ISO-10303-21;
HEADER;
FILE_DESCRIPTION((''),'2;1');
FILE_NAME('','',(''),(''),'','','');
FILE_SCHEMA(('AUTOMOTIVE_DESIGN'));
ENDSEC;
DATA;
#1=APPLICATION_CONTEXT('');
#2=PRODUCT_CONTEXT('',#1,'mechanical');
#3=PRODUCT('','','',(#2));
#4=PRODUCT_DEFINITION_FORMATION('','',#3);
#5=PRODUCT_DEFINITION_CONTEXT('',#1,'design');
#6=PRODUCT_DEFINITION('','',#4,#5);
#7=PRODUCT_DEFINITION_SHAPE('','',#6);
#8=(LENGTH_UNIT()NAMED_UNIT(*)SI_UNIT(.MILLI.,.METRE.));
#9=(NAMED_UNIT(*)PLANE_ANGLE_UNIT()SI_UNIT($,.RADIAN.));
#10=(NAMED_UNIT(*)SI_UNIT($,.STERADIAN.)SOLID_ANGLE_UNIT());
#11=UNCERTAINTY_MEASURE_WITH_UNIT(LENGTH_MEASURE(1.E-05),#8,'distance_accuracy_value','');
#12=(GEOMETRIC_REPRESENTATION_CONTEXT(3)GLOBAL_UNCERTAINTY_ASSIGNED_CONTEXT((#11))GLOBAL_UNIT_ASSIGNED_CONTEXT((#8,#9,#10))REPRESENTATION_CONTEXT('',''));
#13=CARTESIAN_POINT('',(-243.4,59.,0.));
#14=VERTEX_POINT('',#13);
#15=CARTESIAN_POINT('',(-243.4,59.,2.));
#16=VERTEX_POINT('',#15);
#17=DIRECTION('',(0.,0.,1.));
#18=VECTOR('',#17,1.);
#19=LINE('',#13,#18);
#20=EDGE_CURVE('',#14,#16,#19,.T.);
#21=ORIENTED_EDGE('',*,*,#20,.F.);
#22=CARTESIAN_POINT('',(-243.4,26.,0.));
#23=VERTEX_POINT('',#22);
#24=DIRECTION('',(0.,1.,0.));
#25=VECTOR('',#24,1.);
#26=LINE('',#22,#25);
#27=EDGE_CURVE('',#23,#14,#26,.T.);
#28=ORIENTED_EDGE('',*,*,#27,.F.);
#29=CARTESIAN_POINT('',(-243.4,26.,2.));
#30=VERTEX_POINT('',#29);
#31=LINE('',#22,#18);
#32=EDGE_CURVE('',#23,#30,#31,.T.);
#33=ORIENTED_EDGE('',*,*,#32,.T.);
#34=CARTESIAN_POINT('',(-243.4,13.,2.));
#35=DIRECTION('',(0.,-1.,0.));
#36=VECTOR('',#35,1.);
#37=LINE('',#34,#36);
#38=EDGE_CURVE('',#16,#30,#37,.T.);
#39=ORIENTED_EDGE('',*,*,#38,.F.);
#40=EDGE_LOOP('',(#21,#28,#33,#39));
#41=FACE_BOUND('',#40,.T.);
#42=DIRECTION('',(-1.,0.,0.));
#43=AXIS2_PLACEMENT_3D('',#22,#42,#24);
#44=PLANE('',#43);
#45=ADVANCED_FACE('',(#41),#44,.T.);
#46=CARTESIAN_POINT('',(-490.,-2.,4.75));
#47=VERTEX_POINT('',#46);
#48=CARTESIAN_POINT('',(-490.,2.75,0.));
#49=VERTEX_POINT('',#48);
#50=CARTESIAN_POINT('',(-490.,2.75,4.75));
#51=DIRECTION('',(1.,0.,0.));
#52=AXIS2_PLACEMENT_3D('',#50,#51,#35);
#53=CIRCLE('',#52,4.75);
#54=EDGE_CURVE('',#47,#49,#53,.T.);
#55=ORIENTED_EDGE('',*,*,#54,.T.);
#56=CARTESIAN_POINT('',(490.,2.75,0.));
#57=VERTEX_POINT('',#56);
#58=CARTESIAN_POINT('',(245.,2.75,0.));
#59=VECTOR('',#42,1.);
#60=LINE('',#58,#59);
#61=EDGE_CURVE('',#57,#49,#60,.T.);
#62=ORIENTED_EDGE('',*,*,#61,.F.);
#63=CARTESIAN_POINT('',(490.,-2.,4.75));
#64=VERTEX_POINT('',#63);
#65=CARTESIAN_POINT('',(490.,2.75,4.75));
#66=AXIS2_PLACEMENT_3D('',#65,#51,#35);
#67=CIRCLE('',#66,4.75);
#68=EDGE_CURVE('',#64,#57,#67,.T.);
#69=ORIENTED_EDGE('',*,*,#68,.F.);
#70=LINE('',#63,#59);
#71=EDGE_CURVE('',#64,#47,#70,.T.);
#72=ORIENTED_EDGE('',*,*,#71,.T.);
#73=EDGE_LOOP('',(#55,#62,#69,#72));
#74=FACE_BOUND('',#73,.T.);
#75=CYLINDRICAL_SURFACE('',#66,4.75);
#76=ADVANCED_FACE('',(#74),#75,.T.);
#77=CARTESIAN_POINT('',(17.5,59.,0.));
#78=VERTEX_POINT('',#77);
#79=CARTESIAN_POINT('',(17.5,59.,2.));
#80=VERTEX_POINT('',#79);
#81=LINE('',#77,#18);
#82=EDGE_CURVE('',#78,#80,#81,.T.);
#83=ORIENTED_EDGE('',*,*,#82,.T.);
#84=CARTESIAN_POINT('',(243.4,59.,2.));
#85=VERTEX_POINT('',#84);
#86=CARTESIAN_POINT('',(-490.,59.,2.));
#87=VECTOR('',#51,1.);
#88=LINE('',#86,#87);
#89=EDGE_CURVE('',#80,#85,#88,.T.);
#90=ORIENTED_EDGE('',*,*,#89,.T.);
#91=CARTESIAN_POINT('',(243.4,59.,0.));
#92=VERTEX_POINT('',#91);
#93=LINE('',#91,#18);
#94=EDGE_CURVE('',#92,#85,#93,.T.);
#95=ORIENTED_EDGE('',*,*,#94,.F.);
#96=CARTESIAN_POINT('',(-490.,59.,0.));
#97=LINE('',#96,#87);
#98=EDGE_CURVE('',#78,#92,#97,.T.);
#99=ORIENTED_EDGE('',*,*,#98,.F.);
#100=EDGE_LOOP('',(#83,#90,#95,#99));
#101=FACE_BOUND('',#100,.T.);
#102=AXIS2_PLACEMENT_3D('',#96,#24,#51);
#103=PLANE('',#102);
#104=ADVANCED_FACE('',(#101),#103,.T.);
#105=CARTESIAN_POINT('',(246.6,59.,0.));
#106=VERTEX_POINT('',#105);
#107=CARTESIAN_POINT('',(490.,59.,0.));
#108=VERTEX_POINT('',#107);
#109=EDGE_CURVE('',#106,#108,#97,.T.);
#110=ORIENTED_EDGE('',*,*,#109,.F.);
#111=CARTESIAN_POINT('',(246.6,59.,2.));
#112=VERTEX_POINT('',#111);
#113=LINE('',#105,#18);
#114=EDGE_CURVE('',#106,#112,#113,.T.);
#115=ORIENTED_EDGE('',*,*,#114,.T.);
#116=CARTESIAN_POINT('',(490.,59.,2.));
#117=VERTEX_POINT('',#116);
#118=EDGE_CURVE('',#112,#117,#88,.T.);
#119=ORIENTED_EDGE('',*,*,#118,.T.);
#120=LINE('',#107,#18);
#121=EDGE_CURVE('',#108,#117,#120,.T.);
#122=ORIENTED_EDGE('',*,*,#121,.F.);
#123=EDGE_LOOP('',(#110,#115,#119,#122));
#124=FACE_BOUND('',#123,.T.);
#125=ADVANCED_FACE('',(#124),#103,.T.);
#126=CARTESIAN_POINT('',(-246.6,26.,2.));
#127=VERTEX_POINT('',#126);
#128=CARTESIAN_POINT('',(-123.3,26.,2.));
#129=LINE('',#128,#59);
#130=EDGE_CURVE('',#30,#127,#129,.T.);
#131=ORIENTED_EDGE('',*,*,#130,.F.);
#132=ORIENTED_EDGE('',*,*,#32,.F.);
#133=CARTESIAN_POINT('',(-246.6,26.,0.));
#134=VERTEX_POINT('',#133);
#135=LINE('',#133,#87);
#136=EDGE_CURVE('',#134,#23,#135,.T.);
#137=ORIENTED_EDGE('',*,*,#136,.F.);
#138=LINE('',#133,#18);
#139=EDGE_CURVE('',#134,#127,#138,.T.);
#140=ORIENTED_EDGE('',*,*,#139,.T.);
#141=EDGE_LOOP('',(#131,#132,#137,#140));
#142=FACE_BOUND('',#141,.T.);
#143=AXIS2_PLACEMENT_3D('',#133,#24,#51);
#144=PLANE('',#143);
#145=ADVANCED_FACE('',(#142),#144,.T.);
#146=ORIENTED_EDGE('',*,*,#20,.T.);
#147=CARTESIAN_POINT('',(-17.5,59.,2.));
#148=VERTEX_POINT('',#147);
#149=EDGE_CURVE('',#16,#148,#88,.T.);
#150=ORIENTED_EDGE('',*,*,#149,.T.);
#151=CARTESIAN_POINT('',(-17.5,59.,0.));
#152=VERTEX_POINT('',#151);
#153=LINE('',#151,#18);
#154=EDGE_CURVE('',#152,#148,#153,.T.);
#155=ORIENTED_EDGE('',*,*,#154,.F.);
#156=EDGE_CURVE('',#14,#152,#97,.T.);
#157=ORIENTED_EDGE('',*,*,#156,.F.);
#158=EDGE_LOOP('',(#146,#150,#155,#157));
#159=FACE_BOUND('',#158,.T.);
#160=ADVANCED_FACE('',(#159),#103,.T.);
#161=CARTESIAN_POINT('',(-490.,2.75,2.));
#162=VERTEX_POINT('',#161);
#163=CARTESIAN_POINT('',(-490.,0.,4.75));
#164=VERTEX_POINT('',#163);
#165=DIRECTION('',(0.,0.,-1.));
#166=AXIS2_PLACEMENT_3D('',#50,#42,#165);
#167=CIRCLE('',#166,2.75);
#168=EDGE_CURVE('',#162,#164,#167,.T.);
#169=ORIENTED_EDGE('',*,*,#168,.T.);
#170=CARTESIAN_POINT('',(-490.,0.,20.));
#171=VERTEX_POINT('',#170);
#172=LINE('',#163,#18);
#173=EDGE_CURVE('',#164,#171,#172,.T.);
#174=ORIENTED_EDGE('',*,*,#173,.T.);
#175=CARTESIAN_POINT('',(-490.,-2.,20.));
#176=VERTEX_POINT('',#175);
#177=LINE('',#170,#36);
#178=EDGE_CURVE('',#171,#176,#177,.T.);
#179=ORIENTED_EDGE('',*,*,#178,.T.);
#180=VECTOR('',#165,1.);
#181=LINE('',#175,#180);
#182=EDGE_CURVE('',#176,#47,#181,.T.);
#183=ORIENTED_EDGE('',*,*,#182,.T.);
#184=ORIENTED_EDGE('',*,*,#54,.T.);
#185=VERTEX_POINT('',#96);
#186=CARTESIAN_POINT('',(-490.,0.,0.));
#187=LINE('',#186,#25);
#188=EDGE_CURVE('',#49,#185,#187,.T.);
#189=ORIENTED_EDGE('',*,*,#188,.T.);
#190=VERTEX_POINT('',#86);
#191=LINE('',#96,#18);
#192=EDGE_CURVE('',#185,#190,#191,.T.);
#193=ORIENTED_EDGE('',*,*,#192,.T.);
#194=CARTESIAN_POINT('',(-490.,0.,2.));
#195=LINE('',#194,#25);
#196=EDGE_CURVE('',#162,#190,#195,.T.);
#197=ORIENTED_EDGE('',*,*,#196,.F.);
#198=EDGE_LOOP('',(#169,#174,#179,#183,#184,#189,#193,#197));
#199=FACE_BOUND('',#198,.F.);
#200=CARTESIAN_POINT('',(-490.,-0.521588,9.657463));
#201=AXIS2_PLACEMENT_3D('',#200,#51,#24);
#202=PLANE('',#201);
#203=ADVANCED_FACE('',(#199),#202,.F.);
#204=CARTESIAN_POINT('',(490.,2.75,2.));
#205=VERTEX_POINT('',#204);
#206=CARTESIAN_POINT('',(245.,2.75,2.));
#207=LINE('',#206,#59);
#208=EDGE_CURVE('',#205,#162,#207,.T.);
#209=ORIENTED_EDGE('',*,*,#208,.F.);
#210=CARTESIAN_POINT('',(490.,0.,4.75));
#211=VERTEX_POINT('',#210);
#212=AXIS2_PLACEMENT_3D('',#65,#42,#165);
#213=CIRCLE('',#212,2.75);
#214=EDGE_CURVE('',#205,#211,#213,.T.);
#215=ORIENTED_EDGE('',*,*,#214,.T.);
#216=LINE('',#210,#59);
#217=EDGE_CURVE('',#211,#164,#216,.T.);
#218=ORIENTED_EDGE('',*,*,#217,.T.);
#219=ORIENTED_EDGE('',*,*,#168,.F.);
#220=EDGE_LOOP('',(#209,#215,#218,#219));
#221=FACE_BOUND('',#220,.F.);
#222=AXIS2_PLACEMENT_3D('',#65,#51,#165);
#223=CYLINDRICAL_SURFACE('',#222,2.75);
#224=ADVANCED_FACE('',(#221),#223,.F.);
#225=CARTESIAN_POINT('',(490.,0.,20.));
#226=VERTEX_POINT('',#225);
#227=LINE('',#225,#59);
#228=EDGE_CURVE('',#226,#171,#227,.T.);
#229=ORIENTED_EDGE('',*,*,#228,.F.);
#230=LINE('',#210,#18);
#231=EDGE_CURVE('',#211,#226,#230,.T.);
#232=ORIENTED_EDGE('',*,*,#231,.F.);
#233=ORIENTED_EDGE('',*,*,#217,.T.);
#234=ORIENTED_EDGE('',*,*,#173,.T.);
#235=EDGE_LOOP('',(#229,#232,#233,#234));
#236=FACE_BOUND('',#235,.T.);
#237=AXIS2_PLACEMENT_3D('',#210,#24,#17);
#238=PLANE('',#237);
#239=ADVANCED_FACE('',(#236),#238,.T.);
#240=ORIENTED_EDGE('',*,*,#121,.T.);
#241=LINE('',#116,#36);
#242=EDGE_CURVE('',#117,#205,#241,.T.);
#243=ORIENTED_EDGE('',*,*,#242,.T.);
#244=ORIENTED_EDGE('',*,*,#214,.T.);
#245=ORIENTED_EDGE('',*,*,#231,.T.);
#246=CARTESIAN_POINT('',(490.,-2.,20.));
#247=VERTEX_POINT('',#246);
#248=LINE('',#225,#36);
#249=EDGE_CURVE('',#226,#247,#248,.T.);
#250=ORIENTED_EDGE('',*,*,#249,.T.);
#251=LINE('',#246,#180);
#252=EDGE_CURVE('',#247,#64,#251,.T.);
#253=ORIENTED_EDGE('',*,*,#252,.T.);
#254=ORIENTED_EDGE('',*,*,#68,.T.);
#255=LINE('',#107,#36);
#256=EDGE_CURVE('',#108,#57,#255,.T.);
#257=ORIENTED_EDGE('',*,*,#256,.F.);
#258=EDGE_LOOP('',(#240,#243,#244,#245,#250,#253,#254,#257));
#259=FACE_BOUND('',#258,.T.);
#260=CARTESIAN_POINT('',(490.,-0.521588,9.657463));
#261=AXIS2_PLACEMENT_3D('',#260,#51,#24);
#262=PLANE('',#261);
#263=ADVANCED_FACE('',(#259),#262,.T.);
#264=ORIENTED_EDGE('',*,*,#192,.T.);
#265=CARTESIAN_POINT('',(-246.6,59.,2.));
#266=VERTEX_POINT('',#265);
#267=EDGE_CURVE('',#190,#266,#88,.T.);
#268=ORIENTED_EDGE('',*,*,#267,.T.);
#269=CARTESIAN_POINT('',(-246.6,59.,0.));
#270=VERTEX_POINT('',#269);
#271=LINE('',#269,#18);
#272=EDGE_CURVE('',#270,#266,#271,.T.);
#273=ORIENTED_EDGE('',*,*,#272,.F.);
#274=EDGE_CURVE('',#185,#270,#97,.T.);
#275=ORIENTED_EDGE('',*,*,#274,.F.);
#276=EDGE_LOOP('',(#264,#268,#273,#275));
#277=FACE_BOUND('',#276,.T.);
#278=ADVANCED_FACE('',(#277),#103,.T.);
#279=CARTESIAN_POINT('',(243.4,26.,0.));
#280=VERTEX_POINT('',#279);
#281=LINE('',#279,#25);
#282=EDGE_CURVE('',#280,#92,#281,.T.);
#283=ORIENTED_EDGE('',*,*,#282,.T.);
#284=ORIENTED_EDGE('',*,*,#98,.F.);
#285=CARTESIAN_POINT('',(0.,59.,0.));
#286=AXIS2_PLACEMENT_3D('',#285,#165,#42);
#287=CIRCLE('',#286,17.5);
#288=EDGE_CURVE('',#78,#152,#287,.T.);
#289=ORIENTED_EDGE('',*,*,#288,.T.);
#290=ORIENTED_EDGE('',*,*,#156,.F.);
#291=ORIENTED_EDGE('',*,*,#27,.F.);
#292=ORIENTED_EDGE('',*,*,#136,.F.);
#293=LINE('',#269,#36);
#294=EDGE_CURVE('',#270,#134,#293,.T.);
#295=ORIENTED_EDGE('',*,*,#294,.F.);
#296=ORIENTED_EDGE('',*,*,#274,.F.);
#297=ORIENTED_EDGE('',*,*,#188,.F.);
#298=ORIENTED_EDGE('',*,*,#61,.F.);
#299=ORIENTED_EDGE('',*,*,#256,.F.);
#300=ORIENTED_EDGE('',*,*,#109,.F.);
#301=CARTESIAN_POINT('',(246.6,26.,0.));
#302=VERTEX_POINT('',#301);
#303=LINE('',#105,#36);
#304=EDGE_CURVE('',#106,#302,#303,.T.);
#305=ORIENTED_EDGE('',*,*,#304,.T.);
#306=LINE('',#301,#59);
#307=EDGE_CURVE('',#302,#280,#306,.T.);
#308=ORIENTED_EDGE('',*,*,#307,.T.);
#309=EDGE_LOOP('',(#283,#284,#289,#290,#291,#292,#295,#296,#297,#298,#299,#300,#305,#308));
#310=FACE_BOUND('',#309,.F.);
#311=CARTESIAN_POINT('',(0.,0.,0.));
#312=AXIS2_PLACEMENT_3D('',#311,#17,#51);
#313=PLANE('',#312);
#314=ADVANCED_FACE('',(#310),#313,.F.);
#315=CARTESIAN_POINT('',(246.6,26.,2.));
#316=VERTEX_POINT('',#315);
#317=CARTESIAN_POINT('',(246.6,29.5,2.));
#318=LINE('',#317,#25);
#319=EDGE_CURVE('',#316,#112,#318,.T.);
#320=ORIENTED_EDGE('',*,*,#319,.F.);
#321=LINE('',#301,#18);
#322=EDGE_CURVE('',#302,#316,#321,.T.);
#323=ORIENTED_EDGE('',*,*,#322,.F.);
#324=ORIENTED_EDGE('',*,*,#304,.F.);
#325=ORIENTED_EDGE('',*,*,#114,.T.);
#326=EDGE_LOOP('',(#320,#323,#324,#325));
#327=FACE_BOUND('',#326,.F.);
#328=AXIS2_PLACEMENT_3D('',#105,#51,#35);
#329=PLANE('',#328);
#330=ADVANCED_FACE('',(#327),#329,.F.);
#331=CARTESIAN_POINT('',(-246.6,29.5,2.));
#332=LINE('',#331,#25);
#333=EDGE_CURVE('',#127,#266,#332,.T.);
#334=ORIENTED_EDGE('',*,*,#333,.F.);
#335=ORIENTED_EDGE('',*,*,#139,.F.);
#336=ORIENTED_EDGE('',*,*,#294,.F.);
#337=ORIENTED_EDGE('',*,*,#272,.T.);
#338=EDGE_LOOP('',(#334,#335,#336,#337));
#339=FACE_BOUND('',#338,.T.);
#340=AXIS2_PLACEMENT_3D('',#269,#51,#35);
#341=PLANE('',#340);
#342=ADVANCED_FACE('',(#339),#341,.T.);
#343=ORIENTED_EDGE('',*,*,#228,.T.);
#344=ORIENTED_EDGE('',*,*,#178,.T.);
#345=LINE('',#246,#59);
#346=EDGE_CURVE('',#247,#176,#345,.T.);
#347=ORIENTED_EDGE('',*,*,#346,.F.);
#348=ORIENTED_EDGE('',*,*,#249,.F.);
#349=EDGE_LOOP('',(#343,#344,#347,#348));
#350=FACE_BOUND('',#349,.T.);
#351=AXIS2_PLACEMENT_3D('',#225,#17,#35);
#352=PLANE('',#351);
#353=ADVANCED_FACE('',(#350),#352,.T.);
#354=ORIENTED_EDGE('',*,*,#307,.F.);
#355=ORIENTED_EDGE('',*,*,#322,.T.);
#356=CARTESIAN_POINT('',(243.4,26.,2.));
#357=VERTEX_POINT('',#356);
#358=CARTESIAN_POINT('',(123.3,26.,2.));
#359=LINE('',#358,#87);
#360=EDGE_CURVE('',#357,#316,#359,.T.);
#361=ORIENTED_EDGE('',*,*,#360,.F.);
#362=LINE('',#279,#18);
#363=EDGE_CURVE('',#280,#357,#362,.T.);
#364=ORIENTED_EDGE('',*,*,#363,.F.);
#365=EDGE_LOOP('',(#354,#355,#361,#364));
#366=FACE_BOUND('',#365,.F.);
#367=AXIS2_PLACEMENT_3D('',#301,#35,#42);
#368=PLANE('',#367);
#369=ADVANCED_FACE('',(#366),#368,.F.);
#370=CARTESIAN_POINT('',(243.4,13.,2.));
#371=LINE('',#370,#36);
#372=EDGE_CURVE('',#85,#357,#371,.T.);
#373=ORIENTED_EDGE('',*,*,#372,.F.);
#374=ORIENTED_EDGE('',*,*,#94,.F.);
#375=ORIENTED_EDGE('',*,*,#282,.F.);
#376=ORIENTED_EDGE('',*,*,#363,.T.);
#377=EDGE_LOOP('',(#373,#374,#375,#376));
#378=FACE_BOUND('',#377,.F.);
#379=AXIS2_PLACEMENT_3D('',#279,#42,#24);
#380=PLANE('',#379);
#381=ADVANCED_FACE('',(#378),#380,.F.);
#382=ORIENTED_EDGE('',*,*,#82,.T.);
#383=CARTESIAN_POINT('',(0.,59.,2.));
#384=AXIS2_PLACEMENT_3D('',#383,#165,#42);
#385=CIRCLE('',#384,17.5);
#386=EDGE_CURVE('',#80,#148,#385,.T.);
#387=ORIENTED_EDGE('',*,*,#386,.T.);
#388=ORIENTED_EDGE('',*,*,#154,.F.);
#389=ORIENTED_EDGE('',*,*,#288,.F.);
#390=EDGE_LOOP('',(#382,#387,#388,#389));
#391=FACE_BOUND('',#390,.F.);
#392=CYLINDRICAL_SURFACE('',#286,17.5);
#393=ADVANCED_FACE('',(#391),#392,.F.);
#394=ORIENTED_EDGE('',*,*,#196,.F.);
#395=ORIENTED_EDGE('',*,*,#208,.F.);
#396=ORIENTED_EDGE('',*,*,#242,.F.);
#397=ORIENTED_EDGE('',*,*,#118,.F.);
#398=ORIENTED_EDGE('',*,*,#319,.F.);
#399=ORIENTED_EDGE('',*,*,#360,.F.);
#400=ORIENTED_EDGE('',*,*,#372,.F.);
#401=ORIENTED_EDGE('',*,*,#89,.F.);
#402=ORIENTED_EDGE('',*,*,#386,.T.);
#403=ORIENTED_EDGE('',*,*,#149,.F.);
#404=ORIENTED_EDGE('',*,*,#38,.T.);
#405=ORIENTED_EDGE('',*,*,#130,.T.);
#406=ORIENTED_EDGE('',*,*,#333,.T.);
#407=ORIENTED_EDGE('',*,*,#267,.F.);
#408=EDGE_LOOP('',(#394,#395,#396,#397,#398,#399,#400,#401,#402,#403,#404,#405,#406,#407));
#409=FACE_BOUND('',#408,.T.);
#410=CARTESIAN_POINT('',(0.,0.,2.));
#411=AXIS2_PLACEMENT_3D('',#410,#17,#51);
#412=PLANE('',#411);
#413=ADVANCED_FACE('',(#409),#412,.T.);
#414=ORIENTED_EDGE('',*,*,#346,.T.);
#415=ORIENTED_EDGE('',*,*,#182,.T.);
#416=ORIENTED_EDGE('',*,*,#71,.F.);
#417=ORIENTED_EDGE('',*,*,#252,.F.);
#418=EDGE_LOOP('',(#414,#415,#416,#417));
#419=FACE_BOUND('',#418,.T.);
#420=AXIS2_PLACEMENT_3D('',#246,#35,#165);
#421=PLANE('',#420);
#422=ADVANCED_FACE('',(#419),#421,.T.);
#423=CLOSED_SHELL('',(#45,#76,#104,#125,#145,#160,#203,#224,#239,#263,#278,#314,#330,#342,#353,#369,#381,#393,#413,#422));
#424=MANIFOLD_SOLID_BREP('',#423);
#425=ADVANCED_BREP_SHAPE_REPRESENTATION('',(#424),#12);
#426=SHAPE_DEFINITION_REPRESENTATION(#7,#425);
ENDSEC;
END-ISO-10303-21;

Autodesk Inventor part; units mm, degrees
ref_plane "YZ Plane" through (0, 0, 0) normal (1, 0, 0) x (0, 1, 0)
ref_plane "XZ Plane" through (0, 0, 0) normal (0, 1, 0) x (-1, 0, 0)
ref_plane "XY Plane" through (0, 0, 0) normal (0, 0, 1) x (1, 0, 0)
sketch "Sketch1" plane through (0, 0, 0) normal (0, 0, 1) x (1, 0, 0)
  line L0 (-490, 59) -> (490, 59)
  line L1 (490, 59) -> (490, 0)
  line L2 (490, 0) -> (-490, 0)
  line L3 (-490, 0) -> (-490, 59)
  point P0 (0, 0)
  point P1 (0, 0)
  dimension "d0" = 980
  dimension "d1" = 59
extrude "Plate1" add sketch "Sketch1" along normal blind 2
sketch "Sketch2" plane through (490, -2, 0) normal (0, 1, 0) x (-1, 0, 0)
  line L0 (980, 0) -> (0, 0)
  line L1 (0, 0) -> (0, 20)
  line L2 (0, 20) -> (980, 20)
  line L3 (980, 20) -> (980, 0)
edge flange "Flange1" height 20 angle 90 thickness 2 bend radius 2.75 thickness toward (0, 1, 0) relief round relief width 2 relief depth 1 edges at (0, 0, 2) wall of the first edge with corners at (-490, -2, 0) (490, -2, 0) (490, -2, 20) (-490, -2, 20)
bend "Bend1"
corner "Corner1"
sketch "Sketch5" plane through (0, 0, 0) normal (0, 0, -1) x (-1, 0, 0)
  line L0 (490, 59) -> (-490, 59) projected
  line L1 (490, -2) -> (-490, -2) projected
  circle A0 centre (0, 59) radius 17.5
  line L2 (243.4, 59) -> (246.6, 59)
  line L3 (246.6, 59) -> (246.6, 26)
  line L4 (246.6, 26) -> (243.4, 26)
  line L5 (243.4, 26) -> (243.4, 59)
  line L6 (-243.4, 59) -> (-246.6, 59)
  line L7 (-246.6, 59) -> (-246.6, 26)
  line L8 (-246.6, 26) -> (-243.4, 26)
  line L9 (-243.4, 26) -> (-243.4, 59)
  line L10 (0, 59) -> (0, -2) construction
  point P0 (0, 0)
  point P1 (-490, -2)
  point P2 (245, 26)
  point P3 (-245, 26)
  point P4 (246.6, 59)
  point P5 (-17.5, 59)
  point P6 (17.5, 59)
  point P7 (-246.6, 59)
  dimension "d45" = 35
  dimension "d48" = 3.2
  dimension "d49" = 490
  dimension "d51" = 28
  dimension "d52" = 33
extrude "Extrusion1" cut sketch "Sketch5" against normal through all contours L3 L4 L5 L0 | L9 L8 L7 L0 | A0 L0 picked at (-2.238, 52.1497)
sketch "Sketch9" plane through (0, 0, 2) normal (0, 0, 1) x (1, 0, 0)
  line L0 (485.6141, 29.596) -> (485.6141, 17.596) construction
  line L1 (485.6141, 17.596) -> (285.6141, 17.596) construction
  line L2 (285.6141, 17.596) -> (285.6141, 29.596) construction
  line L3 (285.6141, 29.596) -> (485.6141, 29.596) construction
  line L4 (-490, 59) -> (490, 59) projected
  point P0 (0, 0)
  point P1 (1.05, 68)
  point P2 (490, 59)
  dimension "d40" = 200
  dimension "d41" = 12
mark "Mark2"
equation "\"d2\" = Thickness"
equation "\"d3\" = BendReliefWidth"
equation "\"d4\" = BendReliefDepth"
equation "\"d5\" = MinimumRemnant"
equation "\"d6\" = TransitionRadius"
equation "\"d9\" = BendRadius"
equation "\"d10\" = CornerReliefSize"
equation "\"d11\" = GapSize"
equation "\"d12\" = JacobiRadiusSize"
equation "\"BendReliefWidth\" = Thickness"
equation "\"BendReliefDepth\" = 0.5 * Thickness"
equation "\"CornerReliefSize\" = 4 * Thickness"
equation "\"MinimumRemnant\" = 2 * Thickness"
equation "\"TransitionRadius\" = BendRadius"
equation "\"JacobiRadiusSize\" = BendRadius"
equation "\"GapSize\" = Thickness"
equation "\"Thickness\" = 2"
equation "\"BendRadius\" = 2.75"
properties part number "MSC 341 stringer BOARD  #" material "Stainless Steel"
